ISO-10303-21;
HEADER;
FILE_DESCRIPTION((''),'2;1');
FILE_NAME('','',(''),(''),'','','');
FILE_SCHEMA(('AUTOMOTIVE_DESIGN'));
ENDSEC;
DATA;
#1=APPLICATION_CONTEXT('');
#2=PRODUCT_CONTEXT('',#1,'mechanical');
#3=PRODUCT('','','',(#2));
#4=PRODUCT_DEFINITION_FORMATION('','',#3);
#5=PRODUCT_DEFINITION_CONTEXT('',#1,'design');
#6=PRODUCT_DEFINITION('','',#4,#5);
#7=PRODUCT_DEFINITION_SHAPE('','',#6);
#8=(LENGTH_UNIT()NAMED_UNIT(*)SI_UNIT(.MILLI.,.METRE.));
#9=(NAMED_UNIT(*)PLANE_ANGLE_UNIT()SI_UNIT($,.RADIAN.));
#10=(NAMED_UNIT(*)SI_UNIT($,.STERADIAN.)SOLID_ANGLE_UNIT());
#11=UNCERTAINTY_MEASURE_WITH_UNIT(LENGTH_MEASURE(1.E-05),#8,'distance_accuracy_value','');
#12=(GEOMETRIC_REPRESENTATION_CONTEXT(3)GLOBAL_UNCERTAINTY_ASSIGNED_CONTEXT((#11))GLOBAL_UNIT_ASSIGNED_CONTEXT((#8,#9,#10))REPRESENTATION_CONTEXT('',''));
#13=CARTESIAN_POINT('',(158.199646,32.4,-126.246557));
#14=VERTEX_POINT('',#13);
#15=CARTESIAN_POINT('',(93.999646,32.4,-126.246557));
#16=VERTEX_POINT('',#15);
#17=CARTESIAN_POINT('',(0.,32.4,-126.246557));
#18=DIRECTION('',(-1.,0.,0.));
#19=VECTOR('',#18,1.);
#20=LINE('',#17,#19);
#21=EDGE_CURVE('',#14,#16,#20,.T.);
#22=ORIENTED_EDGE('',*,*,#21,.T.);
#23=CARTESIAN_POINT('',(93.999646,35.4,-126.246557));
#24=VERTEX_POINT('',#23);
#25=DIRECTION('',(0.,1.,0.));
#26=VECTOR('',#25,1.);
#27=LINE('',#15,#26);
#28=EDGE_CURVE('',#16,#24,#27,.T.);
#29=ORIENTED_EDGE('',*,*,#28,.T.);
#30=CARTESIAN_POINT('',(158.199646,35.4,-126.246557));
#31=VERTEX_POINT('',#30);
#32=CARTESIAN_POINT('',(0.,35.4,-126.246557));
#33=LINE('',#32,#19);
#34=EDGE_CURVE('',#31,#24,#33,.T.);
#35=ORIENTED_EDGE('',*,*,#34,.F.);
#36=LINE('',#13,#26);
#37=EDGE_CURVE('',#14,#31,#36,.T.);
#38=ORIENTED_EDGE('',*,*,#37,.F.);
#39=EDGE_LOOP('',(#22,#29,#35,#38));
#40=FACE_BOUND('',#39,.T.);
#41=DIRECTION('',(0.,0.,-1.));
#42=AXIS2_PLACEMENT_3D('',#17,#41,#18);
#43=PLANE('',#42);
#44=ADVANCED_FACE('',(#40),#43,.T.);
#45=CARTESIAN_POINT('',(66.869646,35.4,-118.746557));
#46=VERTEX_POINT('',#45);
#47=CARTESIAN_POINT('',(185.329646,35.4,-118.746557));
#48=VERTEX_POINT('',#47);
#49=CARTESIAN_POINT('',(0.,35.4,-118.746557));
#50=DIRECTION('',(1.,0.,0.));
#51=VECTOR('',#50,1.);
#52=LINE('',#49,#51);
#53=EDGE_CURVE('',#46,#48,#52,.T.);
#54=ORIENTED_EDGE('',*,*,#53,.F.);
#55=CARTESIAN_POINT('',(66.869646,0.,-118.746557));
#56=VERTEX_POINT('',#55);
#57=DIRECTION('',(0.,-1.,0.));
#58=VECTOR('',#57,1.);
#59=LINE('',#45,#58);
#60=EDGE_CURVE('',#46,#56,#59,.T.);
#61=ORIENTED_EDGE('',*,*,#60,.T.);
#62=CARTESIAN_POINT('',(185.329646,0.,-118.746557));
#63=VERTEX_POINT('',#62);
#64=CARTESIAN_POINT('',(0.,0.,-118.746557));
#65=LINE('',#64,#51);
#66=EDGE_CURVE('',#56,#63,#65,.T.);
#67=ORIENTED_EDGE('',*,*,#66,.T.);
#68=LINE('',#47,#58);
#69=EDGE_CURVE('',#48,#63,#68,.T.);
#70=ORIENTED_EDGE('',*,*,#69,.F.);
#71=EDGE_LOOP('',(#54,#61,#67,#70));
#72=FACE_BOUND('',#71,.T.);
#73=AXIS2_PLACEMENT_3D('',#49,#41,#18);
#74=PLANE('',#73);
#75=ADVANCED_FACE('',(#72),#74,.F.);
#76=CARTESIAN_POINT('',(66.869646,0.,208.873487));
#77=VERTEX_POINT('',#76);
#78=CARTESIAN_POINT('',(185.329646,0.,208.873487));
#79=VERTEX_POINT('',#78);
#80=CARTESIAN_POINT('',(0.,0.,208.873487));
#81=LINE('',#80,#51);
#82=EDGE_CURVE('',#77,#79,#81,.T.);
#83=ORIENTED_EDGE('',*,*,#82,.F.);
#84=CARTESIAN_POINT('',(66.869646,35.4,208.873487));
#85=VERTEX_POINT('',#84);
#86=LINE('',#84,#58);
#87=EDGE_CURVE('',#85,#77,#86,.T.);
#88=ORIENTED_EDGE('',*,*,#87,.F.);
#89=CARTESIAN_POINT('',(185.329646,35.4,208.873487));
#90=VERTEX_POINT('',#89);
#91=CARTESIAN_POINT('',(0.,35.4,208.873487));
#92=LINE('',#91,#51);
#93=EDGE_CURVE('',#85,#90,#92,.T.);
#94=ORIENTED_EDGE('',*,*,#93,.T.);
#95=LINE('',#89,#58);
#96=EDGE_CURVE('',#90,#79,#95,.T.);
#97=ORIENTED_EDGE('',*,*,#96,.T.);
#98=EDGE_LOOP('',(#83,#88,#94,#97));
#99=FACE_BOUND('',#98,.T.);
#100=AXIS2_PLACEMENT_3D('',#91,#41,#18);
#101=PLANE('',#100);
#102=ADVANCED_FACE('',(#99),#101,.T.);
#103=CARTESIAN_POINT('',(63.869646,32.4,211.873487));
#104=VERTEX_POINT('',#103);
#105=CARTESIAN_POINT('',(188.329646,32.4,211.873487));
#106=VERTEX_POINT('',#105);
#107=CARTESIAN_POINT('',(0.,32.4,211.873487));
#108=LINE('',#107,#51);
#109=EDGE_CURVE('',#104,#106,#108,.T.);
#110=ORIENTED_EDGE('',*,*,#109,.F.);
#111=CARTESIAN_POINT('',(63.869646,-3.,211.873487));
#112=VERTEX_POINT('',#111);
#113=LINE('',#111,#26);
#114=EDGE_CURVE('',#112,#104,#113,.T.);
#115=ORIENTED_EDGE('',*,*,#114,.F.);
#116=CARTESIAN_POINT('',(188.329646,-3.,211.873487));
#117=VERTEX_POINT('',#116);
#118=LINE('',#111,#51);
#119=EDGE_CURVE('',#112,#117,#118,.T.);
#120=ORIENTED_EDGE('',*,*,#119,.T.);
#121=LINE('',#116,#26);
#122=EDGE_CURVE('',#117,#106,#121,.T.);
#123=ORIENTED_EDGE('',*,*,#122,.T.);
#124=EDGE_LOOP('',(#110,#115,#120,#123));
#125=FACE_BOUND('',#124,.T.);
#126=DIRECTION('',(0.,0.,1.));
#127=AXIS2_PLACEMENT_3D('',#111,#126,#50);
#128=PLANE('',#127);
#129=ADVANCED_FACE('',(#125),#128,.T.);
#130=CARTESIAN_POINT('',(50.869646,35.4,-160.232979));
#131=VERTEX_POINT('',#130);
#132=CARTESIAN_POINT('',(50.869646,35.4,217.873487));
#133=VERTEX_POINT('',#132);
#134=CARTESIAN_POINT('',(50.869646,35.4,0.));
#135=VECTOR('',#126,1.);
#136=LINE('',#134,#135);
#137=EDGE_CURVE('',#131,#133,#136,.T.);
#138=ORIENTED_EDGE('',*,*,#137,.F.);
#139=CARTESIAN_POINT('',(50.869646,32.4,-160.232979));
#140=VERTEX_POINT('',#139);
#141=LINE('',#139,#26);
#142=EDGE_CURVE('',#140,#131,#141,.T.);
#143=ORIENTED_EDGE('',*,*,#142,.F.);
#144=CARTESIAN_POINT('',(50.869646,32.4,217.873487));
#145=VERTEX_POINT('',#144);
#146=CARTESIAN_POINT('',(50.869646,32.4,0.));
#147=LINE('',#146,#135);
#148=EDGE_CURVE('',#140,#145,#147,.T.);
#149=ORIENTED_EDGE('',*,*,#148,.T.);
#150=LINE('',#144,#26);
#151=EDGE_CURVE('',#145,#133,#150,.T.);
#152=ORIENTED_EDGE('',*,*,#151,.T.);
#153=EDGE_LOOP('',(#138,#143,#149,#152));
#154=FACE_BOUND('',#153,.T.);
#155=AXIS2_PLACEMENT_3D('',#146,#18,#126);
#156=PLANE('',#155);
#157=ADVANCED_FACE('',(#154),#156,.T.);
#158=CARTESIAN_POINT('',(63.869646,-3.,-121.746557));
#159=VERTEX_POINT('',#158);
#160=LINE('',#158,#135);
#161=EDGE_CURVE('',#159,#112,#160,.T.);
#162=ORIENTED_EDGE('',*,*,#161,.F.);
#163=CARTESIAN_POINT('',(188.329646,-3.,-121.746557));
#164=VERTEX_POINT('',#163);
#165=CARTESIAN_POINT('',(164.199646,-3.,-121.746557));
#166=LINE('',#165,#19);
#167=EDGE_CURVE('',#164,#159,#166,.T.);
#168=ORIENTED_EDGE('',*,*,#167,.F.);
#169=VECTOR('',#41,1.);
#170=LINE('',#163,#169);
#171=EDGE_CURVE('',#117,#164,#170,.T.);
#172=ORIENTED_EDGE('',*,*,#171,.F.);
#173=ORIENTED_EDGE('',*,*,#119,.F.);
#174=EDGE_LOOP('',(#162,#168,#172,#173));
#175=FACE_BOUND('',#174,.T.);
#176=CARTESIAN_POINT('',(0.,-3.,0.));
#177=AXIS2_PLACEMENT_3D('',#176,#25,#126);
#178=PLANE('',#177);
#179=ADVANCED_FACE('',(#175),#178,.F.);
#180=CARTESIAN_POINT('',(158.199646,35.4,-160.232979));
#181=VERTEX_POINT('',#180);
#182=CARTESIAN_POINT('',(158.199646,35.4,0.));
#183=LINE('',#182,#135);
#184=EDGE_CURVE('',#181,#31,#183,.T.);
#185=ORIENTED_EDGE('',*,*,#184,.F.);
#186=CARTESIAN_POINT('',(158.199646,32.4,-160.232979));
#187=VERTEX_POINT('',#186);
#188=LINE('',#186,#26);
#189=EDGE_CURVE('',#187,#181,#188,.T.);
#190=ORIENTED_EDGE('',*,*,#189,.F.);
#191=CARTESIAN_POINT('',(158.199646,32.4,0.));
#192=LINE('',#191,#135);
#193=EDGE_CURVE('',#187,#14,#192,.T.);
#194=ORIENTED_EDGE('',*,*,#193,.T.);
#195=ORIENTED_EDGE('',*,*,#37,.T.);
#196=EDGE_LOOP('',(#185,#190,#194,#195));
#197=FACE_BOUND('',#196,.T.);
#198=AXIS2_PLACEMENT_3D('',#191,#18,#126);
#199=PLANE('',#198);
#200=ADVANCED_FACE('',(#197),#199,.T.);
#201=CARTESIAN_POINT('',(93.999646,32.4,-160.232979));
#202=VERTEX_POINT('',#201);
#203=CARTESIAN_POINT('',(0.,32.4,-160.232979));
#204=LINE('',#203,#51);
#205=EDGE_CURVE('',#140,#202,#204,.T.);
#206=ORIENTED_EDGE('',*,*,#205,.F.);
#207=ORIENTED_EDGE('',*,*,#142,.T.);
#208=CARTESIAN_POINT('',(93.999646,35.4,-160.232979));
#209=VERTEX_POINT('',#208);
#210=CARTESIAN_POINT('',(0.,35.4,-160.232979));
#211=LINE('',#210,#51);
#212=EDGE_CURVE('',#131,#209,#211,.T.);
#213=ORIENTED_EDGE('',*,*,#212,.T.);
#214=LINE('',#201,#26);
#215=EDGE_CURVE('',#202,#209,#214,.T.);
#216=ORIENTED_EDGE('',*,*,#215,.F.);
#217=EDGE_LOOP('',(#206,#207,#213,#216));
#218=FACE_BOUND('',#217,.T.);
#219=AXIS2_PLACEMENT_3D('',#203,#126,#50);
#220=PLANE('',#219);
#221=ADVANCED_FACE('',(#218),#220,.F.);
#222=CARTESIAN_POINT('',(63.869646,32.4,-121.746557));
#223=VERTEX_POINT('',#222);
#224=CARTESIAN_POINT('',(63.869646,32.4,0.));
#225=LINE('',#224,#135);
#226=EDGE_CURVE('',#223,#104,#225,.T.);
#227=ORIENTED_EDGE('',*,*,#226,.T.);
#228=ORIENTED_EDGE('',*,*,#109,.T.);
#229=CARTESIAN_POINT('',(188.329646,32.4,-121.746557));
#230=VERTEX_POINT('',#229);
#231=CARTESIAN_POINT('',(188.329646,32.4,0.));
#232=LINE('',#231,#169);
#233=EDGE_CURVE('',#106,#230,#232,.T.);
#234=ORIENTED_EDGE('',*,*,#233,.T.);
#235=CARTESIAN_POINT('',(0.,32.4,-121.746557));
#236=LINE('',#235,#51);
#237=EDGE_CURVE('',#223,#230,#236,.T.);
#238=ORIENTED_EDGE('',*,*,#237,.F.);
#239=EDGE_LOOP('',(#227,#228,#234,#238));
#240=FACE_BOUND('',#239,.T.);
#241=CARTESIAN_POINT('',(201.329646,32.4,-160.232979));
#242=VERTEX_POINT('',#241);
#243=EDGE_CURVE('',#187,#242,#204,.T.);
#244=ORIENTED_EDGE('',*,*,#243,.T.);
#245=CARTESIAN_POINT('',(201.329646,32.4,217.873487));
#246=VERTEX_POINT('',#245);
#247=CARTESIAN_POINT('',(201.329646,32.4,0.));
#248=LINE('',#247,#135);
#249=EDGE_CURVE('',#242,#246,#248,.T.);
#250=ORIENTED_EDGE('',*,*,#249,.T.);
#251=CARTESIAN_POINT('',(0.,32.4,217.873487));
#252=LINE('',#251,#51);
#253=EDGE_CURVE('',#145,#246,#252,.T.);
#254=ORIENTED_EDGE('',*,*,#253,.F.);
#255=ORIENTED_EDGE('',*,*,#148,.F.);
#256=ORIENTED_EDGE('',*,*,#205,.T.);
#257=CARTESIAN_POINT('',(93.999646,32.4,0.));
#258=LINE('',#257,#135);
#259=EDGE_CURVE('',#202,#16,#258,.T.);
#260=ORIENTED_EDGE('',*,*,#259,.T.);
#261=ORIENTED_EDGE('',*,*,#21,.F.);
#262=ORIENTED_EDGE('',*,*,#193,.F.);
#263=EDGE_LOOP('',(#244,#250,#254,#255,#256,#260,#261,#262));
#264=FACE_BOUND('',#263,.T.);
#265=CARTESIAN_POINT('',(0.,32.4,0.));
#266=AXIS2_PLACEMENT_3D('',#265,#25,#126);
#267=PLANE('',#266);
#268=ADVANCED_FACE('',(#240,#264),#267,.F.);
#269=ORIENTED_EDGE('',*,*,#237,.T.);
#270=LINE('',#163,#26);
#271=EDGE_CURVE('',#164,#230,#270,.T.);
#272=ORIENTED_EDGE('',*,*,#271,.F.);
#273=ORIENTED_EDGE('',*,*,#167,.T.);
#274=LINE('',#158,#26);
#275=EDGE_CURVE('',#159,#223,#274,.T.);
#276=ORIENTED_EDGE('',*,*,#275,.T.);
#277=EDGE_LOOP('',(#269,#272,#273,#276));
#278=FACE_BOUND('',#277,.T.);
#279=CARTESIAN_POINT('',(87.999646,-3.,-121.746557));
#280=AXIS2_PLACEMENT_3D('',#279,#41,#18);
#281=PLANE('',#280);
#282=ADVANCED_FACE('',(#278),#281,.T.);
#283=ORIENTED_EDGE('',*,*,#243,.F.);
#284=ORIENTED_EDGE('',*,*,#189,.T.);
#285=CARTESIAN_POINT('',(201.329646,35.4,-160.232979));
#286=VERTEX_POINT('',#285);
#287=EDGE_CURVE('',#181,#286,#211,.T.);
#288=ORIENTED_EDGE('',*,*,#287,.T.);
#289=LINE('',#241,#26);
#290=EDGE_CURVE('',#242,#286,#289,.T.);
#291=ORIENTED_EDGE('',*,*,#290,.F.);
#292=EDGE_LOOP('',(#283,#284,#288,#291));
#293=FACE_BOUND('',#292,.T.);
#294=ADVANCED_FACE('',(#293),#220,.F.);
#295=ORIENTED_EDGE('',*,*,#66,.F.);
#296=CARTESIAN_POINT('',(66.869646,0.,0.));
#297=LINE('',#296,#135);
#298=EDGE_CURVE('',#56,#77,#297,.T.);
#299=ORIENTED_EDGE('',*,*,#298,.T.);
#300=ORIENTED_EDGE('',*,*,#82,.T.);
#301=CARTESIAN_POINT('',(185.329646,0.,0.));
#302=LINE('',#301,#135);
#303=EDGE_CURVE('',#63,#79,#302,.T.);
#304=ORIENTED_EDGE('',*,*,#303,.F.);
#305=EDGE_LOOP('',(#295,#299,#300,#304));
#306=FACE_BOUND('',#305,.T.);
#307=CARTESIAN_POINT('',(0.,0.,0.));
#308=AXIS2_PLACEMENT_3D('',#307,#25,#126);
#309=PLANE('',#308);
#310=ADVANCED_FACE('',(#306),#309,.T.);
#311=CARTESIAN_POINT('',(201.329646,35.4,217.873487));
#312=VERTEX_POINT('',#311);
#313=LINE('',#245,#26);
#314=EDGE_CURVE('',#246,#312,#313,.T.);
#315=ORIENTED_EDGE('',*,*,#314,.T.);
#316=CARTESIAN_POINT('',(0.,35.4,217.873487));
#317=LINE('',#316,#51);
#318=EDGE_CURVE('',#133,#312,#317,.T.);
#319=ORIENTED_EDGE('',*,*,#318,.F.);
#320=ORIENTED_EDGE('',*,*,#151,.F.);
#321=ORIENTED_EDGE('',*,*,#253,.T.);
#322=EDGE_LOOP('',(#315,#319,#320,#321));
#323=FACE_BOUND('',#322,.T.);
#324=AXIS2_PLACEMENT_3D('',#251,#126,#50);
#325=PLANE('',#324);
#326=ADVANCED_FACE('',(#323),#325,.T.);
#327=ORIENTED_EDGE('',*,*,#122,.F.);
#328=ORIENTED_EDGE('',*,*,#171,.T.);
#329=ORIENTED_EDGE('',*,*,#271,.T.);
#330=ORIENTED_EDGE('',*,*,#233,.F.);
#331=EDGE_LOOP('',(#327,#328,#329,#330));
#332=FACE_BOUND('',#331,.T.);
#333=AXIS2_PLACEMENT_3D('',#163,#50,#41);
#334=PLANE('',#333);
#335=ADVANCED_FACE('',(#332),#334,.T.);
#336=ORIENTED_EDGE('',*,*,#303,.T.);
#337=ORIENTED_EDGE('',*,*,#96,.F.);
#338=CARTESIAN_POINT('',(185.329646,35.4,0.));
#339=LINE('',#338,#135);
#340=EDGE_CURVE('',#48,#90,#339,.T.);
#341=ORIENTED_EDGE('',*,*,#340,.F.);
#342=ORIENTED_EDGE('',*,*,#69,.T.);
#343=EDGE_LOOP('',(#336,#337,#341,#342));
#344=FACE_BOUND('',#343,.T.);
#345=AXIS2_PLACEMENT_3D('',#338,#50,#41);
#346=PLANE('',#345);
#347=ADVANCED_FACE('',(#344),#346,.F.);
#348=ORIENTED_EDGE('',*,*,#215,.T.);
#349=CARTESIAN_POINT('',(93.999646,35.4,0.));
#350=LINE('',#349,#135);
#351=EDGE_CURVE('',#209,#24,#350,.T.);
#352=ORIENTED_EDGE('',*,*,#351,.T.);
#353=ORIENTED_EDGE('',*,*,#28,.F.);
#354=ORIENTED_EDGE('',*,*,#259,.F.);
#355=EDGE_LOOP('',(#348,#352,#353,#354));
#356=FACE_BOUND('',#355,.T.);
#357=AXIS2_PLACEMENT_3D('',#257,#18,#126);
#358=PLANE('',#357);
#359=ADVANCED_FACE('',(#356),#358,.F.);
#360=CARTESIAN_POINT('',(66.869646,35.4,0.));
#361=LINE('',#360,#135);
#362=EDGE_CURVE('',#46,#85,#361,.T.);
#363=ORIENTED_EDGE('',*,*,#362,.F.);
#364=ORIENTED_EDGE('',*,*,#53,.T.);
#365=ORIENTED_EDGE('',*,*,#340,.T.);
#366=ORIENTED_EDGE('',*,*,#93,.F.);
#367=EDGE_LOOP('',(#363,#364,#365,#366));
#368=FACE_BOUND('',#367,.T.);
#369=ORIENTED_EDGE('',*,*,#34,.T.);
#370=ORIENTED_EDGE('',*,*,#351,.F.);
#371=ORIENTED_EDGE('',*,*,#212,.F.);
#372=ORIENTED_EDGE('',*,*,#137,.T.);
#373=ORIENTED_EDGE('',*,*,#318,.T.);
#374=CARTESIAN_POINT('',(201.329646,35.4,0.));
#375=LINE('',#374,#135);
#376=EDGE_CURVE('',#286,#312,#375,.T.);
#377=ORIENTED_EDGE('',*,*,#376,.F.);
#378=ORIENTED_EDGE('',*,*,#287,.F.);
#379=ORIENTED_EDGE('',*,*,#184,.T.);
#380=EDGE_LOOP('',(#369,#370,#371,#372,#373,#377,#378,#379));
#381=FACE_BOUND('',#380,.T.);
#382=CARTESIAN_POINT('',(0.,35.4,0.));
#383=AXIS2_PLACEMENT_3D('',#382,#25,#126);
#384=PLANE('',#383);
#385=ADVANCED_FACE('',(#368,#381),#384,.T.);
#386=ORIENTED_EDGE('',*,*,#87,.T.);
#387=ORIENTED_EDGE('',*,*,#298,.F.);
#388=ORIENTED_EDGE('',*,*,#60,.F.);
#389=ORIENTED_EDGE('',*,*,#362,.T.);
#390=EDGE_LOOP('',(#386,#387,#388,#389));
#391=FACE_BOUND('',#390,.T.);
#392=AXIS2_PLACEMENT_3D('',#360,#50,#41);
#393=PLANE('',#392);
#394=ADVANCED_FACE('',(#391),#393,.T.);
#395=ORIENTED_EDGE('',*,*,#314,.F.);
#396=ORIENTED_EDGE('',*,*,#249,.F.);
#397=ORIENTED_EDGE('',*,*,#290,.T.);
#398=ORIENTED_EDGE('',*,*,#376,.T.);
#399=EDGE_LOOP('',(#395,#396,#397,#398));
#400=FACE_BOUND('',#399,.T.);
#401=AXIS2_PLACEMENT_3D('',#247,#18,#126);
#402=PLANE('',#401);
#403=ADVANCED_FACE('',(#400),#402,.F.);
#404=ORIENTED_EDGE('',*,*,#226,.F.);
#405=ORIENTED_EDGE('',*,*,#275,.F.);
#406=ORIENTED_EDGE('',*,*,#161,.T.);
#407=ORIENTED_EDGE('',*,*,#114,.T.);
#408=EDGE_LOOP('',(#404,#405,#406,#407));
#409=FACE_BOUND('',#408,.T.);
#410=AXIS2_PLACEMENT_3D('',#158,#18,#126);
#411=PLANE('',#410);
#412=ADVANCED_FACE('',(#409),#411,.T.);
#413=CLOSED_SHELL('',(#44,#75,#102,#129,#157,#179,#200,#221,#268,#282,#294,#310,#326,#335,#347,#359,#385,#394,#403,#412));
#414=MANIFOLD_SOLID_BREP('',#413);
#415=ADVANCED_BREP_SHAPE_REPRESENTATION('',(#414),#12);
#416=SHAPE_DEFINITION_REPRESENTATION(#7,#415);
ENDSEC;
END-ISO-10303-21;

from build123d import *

# Parameters (mm, degrees)
BASE_FLANGE1_DEPTH  = 3
BOSS_EXTRUDE1_DEPTH = 35.4
BOSS_EXTRUDE2_DEPTH = 3


# Sheet-metal steps are written as plain solids
with BuildPart() as part:
    # Sketch1 → Base-Flange1 (new body)
    with BuildSketch(Plane(origin=(0, 0, 0), x_dir=(1, 0, 0), z_dir=(0, 1, 0))):
        Polygon((63.869646018, 121.746556797), (63.869646018, -211.873486949), (188.329646018, -211.873486949), (188.329646018, 121.746556797), (164.199646018, 121.746556797), (87.999646018, 121.746556797), align=None)
    extrude(amount=-BASE_FLANGE1_DEPTH)

    # Sketch75 → Boss-Extrude1 (add)
    with BuildSketch(Plane(origin=(0, 0, 0), x_dir=(1, 0, 0), z_dir=(0, 1, 0))):
        Polygon((188.329646018, -193.287020835), (188.329646018, 121.746556797), (185.329646018, 121.746556797), (164.199646018, 121.746556797), (87.999646018, 121.746556797), (63.869646018, 121.746556797), (63.869646018, -211.873486949), (66.869646018, -211.873486949), (188.329646018, -211.873486949), align=None)
        Polygon((167.199646018, 118.746556797), (185.329646018, 118.746556797), (185.329646018, -208.873486949), (66.869646018, -208.873486949), (66.869646018, 118.746556797), (84.999646018, 118.746556797), (87.999646018, 118.746556797), (164.199646018, 118.746556797), align=None, mode=Mode.SUBTRACT)
    extrude(amount=BOSS_EXTRUDE1_DEPTH)

    # Sketch76 → Boss-Extrude2 (add)
    with BuildSketch(Plane(origin=(0, 35.4, 0), x_dir=(1, 0, 0), z_dir=(0, 1, 0))):
        Polygon((188.329646018, 160.232979165), (168.60717256, 160.232979165), (158.199646018, 160.232979165), (158.199646018, 126.246556797), (93.999646018, 126.246556797), (93.999646018, 154.232979165), (93.999646018, 160.232979165), (61.173757876, 160.232979165), (50.869646018, 160.232979165), (50.869646018, -212.840780944), (50.869646018, -217.873486949), (190.329646018, -217.873486949), (201.329646018, -217.873486949), (201.329646018, 160.232979165), align=None)
        Polygon((63.869646018, -211.873486949), (63.869646018, 121.746556797), (87.999646018, 121.746556797), (142.998933393, 121.746556797), (164.199646018, 121.746556797), (188.329646018, 121.746556797), (188.329646018, -211.873486949), align=None, mode=Mode.SUBTRACT)
    extrude(amount=-BOSS_EXTRUDE2_DEPTH)


solid = part.part
